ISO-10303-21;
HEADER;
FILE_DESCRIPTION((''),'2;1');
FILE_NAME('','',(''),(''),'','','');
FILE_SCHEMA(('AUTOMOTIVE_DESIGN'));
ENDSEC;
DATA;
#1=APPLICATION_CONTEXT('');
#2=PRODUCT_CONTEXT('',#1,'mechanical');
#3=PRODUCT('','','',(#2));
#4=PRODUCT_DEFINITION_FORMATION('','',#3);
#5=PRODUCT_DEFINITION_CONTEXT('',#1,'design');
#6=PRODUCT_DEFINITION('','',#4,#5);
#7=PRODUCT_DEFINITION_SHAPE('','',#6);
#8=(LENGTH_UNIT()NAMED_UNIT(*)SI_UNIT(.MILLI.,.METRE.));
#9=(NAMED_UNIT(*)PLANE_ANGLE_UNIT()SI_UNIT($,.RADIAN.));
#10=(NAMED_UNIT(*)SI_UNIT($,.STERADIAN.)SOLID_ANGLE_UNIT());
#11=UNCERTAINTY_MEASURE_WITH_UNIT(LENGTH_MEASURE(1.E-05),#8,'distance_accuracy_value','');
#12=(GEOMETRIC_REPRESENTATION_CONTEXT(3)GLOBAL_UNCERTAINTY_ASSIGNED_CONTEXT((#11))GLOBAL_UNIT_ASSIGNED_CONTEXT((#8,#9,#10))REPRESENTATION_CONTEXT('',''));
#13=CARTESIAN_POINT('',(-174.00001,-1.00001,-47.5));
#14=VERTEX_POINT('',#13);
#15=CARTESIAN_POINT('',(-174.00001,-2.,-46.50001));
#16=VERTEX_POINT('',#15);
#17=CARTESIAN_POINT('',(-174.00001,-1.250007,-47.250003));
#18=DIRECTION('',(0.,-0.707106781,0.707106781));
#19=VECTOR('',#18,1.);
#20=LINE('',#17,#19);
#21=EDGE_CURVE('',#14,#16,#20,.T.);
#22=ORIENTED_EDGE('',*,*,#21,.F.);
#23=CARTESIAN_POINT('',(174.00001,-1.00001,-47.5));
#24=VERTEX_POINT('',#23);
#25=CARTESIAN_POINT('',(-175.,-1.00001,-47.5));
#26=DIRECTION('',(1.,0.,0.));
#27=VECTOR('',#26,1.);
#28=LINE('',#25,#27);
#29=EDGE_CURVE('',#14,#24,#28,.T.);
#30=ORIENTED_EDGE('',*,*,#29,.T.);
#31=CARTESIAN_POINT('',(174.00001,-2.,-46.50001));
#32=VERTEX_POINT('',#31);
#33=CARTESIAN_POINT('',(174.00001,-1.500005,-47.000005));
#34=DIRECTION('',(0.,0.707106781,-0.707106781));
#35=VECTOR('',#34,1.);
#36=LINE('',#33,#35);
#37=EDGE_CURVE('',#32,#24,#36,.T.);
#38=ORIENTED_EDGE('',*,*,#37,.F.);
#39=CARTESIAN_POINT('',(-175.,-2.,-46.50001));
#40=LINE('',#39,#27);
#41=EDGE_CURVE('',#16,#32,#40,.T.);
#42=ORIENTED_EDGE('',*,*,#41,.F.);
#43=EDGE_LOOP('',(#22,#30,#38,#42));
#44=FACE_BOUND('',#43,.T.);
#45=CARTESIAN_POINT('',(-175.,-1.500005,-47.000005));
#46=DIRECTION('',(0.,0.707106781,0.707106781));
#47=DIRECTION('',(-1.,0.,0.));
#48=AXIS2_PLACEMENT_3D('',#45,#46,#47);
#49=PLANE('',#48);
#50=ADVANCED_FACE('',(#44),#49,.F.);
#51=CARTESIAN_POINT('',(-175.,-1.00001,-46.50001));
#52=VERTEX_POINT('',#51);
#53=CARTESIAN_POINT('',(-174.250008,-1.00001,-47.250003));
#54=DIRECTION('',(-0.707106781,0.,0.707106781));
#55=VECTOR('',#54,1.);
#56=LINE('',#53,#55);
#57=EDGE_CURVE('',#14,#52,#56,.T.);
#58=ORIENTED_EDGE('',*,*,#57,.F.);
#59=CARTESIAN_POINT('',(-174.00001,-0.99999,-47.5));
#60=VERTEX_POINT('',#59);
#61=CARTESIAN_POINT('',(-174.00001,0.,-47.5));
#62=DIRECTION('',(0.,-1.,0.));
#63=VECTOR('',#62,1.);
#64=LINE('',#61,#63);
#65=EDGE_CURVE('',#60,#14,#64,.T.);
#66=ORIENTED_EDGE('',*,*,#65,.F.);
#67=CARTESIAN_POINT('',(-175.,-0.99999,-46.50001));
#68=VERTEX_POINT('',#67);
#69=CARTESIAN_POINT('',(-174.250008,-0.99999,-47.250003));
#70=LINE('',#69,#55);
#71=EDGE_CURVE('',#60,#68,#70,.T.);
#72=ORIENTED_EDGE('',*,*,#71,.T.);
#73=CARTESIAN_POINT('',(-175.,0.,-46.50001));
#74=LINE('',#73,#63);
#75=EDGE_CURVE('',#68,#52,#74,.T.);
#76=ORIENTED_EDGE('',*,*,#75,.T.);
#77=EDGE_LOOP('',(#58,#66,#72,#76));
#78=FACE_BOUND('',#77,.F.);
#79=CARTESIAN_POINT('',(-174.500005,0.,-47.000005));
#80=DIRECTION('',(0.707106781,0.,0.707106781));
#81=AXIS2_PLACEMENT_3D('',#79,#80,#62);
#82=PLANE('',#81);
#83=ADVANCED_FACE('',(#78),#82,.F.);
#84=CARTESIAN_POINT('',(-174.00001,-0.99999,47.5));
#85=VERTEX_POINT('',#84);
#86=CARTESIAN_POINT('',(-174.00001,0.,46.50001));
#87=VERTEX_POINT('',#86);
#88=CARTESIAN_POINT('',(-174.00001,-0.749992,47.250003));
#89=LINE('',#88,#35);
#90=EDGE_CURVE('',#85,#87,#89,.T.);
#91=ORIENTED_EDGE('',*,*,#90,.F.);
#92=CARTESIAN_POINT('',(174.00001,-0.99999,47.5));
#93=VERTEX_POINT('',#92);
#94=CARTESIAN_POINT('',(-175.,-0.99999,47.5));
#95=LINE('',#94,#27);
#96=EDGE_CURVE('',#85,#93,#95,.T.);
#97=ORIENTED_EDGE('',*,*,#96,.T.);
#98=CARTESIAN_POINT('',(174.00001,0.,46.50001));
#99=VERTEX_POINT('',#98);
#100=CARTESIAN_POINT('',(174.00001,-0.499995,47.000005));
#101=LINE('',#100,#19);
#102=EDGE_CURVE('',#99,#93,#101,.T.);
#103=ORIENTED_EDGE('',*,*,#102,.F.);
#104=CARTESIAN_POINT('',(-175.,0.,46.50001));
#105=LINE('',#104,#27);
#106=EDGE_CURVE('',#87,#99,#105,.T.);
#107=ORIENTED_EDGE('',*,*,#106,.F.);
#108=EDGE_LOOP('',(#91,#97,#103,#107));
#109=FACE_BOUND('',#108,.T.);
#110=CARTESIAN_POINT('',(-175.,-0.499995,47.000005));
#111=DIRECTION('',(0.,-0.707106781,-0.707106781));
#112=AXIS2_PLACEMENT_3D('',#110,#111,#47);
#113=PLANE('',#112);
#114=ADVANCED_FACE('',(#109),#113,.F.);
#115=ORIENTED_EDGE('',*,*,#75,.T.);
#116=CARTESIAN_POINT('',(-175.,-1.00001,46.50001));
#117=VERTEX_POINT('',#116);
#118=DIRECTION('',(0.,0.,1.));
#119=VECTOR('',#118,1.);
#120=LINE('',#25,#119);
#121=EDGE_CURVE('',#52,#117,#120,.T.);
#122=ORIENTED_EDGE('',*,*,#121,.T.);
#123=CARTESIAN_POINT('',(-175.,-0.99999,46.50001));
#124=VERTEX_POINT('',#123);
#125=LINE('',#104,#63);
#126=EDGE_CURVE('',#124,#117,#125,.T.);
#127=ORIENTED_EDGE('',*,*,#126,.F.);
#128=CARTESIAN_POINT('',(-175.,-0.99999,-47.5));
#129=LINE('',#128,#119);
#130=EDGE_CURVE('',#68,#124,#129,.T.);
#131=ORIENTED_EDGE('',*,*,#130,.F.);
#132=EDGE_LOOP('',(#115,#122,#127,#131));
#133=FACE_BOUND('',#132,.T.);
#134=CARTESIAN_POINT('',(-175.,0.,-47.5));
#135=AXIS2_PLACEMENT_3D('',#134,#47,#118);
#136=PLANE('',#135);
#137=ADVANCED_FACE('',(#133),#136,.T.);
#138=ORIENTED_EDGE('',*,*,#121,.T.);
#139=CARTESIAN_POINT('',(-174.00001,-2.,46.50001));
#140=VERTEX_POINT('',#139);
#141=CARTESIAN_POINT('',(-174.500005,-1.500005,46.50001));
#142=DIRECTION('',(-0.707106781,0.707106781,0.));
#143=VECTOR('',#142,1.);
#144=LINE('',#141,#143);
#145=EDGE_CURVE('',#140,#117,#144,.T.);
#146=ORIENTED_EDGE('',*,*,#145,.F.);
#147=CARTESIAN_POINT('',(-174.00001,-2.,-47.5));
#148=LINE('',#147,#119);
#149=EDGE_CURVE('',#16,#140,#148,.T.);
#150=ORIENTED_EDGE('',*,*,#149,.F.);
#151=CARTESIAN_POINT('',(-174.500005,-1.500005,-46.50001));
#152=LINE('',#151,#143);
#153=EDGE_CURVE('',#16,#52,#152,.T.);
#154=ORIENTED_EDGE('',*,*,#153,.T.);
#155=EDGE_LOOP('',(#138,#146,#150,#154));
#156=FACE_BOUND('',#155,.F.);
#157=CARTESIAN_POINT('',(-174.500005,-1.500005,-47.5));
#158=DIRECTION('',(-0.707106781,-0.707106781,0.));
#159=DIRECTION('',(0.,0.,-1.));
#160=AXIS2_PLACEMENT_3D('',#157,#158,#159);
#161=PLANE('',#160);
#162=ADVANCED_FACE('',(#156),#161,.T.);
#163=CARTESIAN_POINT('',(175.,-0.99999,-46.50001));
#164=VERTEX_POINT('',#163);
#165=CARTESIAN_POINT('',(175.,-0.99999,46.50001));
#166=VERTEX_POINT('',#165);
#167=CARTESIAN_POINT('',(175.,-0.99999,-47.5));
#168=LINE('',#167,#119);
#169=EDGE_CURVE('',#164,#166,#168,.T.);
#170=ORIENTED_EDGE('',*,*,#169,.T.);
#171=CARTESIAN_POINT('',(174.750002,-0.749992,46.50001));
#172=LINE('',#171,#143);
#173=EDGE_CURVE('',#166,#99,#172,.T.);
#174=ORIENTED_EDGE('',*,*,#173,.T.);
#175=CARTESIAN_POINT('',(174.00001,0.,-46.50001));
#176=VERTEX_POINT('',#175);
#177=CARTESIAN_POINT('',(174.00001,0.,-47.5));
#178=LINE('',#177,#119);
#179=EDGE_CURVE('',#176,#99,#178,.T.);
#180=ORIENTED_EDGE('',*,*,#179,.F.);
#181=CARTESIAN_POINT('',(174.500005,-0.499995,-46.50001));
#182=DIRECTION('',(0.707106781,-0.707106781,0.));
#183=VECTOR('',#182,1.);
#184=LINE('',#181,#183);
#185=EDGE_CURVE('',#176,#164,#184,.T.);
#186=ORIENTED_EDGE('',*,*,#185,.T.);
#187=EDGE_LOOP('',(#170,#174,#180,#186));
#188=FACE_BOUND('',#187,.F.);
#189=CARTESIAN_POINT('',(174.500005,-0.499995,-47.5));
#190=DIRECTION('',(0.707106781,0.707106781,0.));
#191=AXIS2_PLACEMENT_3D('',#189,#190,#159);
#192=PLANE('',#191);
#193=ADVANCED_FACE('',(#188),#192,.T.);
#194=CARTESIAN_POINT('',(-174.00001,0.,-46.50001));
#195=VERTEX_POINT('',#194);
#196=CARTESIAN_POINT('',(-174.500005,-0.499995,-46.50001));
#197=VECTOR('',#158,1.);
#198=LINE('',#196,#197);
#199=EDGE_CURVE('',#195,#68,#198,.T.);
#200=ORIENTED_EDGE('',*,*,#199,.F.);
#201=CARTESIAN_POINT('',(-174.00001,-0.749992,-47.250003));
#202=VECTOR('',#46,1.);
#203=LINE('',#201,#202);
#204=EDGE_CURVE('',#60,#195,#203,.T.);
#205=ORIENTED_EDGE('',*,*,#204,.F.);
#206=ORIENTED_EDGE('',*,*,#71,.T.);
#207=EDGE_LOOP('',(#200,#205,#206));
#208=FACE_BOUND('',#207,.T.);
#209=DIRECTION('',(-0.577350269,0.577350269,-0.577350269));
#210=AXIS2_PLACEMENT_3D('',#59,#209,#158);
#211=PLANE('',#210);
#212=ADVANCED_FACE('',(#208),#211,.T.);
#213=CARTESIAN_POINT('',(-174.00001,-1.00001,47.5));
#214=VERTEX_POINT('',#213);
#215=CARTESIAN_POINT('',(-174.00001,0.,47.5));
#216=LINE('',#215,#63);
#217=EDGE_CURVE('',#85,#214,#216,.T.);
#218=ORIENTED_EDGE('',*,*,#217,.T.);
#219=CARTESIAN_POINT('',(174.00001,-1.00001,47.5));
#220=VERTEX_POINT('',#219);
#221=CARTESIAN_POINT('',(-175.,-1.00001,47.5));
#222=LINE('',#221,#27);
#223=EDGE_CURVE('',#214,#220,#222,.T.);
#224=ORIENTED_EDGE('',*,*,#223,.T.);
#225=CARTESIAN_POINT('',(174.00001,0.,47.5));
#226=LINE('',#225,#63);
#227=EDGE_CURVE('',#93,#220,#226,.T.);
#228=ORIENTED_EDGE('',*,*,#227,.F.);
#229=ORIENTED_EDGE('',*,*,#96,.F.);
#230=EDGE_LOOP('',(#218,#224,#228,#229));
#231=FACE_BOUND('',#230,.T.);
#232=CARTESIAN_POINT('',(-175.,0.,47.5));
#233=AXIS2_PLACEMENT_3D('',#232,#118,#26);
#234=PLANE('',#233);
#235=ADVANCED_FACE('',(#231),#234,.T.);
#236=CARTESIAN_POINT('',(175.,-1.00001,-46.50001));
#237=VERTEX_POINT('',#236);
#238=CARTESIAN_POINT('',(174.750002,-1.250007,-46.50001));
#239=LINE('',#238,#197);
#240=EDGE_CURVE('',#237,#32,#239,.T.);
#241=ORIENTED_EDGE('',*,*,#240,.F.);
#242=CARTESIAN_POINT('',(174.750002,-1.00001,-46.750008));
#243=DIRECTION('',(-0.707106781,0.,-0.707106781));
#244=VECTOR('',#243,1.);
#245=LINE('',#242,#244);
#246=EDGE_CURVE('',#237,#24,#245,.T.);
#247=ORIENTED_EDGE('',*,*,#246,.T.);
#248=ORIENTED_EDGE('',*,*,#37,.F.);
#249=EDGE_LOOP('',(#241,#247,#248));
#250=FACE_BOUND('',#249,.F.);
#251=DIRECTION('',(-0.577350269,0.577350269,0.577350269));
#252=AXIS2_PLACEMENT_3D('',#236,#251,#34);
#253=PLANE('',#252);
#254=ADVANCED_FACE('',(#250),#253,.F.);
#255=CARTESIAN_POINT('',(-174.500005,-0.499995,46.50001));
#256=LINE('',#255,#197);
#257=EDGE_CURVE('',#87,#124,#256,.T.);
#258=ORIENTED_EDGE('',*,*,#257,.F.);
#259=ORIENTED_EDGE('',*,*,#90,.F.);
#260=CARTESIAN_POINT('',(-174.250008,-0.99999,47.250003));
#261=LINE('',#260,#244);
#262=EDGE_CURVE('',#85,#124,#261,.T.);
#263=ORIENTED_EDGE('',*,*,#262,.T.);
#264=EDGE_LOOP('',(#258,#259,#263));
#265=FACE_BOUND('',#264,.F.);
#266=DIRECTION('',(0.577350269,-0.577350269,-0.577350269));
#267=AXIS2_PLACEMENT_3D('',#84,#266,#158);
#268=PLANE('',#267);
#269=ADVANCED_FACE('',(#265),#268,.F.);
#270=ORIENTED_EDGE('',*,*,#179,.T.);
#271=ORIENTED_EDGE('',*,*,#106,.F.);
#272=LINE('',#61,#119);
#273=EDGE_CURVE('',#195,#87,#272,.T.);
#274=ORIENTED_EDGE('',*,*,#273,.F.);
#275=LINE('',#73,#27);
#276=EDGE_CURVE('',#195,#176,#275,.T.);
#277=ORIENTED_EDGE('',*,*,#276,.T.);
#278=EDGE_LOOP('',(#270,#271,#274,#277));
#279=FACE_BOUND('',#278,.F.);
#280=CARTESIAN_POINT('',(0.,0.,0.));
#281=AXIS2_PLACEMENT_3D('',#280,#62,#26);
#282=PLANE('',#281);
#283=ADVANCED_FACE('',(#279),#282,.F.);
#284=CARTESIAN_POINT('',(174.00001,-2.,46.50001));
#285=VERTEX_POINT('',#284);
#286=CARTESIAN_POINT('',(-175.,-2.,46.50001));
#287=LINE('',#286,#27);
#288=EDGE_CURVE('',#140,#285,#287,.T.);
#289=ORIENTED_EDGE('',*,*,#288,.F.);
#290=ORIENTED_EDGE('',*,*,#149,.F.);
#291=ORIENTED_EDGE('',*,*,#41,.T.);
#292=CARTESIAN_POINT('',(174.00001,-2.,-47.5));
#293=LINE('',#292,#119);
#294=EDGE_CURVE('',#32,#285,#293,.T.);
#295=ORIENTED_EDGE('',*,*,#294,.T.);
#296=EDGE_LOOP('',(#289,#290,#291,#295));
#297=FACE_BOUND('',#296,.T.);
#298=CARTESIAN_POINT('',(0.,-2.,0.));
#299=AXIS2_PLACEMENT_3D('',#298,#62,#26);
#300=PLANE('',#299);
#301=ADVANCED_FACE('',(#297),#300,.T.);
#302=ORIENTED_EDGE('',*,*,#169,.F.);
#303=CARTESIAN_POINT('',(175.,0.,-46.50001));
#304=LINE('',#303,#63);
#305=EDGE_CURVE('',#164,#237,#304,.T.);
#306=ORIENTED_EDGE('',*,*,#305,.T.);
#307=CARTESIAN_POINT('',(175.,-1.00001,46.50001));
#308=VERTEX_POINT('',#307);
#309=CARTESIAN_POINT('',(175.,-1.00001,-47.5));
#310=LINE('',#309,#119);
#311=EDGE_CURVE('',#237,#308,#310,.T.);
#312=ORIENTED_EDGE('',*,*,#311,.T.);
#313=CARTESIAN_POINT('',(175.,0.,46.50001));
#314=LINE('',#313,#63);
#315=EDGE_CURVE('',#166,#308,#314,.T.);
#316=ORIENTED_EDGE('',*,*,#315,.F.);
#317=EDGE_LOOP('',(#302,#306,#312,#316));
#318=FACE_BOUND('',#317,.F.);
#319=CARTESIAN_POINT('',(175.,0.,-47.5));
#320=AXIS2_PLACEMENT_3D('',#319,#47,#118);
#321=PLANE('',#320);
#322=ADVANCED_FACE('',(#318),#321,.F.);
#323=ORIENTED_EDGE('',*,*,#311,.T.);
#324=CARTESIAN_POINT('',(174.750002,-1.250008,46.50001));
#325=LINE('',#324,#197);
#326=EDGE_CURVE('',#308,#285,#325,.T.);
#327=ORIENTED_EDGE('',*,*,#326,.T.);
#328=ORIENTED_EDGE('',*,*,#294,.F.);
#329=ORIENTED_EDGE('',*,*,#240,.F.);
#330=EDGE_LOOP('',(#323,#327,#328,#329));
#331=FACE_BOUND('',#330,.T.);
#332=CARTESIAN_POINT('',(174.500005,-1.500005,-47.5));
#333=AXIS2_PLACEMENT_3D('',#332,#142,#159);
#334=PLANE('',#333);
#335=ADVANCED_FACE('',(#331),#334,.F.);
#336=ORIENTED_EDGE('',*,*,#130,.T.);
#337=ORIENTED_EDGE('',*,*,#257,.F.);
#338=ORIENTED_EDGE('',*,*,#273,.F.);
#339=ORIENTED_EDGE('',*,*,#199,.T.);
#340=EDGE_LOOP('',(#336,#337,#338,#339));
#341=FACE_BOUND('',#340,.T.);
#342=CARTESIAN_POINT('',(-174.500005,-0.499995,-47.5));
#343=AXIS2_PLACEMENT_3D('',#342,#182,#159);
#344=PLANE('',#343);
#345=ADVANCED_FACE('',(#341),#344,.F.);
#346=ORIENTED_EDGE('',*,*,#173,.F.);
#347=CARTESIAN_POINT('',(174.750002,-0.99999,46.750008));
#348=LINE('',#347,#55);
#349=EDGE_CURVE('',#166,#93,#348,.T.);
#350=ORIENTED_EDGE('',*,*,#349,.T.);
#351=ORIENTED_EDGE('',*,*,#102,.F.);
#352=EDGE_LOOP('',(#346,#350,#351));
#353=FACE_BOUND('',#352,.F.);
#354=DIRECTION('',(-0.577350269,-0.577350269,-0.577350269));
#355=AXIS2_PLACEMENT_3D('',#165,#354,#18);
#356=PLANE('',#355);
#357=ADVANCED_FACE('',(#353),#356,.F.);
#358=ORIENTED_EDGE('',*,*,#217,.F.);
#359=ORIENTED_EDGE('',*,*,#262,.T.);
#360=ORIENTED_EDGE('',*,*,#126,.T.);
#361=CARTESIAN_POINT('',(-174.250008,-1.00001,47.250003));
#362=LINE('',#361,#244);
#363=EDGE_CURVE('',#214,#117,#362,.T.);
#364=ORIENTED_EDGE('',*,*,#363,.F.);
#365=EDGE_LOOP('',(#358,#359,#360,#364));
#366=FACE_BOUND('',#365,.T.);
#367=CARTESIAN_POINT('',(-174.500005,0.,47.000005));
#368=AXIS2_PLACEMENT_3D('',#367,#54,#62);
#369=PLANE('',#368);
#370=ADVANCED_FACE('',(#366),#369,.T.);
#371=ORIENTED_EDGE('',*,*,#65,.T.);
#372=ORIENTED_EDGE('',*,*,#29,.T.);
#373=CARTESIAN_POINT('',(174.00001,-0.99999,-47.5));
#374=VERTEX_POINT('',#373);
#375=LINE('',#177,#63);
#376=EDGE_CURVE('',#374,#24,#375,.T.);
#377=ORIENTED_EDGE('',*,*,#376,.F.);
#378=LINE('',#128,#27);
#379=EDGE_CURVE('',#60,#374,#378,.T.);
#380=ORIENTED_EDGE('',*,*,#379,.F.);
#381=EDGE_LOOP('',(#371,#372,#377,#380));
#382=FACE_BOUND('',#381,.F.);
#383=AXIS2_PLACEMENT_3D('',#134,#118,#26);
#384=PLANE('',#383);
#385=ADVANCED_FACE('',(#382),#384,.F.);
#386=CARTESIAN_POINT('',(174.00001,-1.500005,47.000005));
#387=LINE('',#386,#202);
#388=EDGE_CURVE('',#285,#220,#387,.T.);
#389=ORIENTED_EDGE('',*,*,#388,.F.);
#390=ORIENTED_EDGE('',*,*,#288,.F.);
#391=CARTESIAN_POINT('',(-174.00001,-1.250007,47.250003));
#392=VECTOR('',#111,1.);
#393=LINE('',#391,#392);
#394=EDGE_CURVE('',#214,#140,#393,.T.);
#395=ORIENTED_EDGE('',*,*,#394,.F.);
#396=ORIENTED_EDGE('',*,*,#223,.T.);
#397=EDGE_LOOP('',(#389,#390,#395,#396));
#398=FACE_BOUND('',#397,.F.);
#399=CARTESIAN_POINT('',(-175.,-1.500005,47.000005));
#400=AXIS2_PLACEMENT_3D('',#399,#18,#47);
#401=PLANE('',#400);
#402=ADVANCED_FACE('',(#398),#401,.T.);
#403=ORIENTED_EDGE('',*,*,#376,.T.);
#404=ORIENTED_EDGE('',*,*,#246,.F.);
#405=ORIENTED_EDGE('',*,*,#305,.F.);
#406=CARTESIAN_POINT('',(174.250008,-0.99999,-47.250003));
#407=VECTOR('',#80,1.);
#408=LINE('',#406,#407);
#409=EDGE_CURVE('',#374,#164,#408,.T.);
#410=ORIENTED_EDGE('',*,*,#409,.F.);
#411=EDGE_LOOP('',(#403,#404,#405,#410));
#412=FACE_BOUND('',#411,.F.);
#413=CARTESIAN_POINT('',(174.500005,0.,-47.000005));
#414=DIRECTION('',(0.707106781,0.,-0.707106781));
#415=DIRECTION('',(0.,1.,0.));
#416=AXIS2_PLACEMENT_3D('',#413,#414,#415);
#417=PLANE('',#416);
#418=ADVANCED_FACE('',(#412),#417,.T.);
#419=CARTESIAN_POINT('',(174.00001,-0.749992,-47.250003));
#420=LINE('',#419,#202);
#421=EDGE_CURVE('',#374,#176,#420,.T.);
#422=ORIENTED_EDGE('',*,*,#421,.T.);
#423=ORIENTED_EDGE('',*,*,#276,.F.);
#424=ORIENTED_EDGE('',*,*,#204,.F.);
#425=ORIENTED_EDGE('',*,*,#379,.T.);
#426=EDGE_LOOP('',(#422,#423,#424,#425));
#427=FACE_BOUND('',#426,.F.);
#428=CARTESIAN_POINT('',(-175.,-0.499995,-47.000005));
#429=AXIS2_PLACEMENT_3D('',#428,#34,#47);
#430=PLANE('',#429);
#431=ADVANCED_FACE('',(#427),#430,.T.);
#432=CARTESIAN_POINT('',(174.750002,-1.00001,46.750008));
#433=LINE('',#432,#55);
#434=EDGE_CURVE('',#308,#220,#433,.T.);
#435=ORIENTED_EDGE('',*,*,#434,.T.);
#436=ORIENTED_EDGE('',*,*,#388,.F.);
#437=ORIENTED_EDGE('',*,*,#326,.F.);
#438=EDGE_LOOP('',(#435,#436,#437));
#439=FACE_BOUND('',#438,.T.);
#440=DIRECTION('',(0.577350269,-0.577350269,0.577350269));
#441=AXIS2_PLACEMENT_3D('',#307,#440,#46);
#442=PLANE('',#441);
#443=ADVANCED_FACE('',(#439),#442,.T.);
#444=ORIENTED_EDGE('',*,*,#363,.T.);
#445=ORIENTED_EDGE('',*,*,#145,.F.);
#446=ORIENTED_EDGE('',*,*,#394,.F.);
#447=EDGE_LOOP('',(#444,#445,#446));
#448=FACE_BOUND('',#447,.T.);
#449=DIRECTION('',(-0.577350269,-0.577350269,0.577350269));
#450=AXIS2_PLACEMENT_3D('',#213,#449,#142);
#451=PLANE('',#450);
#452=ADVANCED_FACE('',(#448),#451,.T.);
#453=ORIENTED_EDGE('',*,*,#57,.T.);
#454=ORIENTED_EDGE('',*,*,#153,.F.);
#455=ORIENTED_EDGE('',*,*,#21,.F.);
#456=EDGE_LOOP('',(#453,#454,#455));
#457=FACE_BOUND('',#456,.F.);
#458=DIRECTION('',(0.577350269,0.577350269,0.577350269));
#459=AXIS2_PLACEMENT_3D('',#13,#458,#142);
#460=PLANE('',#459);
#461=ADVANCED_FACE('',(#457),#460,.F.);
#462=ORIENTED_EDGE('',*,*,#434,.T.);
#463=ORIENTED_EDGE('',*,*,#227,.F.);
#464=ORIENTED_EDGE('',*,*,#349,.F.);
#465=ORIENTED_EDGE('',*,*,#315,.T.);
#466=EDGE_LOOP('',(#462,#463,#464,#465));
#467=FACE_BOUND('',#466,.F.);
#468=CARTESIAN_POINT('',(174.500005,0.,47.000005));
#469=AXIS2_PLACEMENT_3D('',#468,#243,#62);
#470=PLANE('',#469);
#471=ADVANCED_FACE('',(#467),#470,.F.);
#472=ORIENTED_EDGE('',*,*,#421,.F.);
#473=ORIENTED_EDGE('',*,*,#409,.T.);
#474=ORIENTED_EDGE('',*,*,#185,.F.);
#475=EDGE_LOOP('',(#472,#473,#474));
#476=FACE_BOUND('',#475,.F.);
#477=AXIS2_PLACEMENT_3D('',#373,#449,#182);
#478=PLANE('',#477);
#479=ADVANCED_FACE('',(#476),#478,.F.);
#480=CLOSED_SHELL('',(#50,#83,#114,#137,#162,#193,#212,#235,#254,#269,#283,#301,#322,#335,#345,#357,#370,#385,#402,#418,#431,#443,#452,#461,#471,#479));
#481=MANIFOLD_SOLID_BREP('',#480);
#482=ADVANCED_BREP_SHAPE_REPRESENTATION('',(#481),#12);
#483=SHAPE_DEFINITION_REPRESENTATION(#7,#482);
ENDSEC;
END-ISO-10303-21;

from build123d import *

# Parameters (mm, degrees)
F0_W     = 350
F0_H     = 95
F1_DEPTH = 2
F2_SIZE  = 0.99999


# Not quite as in the source:
# - a fillet or chamfer is up to 0.001 mm smaller than in the source, because OpenCascade refuses the exact size


with BuildPart() as f1:
    # F0 (on Front) → F1 (new body)
    with BuildSketch(Plane.XZ):
        Rectangle(F0_W, F0_H)
    extrude(amount=F1_DEPTH)

    # F2 (size 1 in the source; OpenCascade refuses exactly that, so slightly less here)
    f2_edges = [f1.edges().sort_by_distance(p)[0] for p in [
        (-175, -2, 0),
        (0, -2, 47.5),
        (0, -2, -47.5),
        (175, -2, 0),
        (-175, 0, 0),
        (0, 0, 47.5),
        (175, 0, 0),
        (0, 0, -47.5),
        (175, -1, -47.5),
        (175, -1, 47.5),
        (-175, -1, -47.5),
        (-175, -1, 47.5),
    ]]
    chamfer(f2_edges, length=F2_SIZE)


solid = f1.part
